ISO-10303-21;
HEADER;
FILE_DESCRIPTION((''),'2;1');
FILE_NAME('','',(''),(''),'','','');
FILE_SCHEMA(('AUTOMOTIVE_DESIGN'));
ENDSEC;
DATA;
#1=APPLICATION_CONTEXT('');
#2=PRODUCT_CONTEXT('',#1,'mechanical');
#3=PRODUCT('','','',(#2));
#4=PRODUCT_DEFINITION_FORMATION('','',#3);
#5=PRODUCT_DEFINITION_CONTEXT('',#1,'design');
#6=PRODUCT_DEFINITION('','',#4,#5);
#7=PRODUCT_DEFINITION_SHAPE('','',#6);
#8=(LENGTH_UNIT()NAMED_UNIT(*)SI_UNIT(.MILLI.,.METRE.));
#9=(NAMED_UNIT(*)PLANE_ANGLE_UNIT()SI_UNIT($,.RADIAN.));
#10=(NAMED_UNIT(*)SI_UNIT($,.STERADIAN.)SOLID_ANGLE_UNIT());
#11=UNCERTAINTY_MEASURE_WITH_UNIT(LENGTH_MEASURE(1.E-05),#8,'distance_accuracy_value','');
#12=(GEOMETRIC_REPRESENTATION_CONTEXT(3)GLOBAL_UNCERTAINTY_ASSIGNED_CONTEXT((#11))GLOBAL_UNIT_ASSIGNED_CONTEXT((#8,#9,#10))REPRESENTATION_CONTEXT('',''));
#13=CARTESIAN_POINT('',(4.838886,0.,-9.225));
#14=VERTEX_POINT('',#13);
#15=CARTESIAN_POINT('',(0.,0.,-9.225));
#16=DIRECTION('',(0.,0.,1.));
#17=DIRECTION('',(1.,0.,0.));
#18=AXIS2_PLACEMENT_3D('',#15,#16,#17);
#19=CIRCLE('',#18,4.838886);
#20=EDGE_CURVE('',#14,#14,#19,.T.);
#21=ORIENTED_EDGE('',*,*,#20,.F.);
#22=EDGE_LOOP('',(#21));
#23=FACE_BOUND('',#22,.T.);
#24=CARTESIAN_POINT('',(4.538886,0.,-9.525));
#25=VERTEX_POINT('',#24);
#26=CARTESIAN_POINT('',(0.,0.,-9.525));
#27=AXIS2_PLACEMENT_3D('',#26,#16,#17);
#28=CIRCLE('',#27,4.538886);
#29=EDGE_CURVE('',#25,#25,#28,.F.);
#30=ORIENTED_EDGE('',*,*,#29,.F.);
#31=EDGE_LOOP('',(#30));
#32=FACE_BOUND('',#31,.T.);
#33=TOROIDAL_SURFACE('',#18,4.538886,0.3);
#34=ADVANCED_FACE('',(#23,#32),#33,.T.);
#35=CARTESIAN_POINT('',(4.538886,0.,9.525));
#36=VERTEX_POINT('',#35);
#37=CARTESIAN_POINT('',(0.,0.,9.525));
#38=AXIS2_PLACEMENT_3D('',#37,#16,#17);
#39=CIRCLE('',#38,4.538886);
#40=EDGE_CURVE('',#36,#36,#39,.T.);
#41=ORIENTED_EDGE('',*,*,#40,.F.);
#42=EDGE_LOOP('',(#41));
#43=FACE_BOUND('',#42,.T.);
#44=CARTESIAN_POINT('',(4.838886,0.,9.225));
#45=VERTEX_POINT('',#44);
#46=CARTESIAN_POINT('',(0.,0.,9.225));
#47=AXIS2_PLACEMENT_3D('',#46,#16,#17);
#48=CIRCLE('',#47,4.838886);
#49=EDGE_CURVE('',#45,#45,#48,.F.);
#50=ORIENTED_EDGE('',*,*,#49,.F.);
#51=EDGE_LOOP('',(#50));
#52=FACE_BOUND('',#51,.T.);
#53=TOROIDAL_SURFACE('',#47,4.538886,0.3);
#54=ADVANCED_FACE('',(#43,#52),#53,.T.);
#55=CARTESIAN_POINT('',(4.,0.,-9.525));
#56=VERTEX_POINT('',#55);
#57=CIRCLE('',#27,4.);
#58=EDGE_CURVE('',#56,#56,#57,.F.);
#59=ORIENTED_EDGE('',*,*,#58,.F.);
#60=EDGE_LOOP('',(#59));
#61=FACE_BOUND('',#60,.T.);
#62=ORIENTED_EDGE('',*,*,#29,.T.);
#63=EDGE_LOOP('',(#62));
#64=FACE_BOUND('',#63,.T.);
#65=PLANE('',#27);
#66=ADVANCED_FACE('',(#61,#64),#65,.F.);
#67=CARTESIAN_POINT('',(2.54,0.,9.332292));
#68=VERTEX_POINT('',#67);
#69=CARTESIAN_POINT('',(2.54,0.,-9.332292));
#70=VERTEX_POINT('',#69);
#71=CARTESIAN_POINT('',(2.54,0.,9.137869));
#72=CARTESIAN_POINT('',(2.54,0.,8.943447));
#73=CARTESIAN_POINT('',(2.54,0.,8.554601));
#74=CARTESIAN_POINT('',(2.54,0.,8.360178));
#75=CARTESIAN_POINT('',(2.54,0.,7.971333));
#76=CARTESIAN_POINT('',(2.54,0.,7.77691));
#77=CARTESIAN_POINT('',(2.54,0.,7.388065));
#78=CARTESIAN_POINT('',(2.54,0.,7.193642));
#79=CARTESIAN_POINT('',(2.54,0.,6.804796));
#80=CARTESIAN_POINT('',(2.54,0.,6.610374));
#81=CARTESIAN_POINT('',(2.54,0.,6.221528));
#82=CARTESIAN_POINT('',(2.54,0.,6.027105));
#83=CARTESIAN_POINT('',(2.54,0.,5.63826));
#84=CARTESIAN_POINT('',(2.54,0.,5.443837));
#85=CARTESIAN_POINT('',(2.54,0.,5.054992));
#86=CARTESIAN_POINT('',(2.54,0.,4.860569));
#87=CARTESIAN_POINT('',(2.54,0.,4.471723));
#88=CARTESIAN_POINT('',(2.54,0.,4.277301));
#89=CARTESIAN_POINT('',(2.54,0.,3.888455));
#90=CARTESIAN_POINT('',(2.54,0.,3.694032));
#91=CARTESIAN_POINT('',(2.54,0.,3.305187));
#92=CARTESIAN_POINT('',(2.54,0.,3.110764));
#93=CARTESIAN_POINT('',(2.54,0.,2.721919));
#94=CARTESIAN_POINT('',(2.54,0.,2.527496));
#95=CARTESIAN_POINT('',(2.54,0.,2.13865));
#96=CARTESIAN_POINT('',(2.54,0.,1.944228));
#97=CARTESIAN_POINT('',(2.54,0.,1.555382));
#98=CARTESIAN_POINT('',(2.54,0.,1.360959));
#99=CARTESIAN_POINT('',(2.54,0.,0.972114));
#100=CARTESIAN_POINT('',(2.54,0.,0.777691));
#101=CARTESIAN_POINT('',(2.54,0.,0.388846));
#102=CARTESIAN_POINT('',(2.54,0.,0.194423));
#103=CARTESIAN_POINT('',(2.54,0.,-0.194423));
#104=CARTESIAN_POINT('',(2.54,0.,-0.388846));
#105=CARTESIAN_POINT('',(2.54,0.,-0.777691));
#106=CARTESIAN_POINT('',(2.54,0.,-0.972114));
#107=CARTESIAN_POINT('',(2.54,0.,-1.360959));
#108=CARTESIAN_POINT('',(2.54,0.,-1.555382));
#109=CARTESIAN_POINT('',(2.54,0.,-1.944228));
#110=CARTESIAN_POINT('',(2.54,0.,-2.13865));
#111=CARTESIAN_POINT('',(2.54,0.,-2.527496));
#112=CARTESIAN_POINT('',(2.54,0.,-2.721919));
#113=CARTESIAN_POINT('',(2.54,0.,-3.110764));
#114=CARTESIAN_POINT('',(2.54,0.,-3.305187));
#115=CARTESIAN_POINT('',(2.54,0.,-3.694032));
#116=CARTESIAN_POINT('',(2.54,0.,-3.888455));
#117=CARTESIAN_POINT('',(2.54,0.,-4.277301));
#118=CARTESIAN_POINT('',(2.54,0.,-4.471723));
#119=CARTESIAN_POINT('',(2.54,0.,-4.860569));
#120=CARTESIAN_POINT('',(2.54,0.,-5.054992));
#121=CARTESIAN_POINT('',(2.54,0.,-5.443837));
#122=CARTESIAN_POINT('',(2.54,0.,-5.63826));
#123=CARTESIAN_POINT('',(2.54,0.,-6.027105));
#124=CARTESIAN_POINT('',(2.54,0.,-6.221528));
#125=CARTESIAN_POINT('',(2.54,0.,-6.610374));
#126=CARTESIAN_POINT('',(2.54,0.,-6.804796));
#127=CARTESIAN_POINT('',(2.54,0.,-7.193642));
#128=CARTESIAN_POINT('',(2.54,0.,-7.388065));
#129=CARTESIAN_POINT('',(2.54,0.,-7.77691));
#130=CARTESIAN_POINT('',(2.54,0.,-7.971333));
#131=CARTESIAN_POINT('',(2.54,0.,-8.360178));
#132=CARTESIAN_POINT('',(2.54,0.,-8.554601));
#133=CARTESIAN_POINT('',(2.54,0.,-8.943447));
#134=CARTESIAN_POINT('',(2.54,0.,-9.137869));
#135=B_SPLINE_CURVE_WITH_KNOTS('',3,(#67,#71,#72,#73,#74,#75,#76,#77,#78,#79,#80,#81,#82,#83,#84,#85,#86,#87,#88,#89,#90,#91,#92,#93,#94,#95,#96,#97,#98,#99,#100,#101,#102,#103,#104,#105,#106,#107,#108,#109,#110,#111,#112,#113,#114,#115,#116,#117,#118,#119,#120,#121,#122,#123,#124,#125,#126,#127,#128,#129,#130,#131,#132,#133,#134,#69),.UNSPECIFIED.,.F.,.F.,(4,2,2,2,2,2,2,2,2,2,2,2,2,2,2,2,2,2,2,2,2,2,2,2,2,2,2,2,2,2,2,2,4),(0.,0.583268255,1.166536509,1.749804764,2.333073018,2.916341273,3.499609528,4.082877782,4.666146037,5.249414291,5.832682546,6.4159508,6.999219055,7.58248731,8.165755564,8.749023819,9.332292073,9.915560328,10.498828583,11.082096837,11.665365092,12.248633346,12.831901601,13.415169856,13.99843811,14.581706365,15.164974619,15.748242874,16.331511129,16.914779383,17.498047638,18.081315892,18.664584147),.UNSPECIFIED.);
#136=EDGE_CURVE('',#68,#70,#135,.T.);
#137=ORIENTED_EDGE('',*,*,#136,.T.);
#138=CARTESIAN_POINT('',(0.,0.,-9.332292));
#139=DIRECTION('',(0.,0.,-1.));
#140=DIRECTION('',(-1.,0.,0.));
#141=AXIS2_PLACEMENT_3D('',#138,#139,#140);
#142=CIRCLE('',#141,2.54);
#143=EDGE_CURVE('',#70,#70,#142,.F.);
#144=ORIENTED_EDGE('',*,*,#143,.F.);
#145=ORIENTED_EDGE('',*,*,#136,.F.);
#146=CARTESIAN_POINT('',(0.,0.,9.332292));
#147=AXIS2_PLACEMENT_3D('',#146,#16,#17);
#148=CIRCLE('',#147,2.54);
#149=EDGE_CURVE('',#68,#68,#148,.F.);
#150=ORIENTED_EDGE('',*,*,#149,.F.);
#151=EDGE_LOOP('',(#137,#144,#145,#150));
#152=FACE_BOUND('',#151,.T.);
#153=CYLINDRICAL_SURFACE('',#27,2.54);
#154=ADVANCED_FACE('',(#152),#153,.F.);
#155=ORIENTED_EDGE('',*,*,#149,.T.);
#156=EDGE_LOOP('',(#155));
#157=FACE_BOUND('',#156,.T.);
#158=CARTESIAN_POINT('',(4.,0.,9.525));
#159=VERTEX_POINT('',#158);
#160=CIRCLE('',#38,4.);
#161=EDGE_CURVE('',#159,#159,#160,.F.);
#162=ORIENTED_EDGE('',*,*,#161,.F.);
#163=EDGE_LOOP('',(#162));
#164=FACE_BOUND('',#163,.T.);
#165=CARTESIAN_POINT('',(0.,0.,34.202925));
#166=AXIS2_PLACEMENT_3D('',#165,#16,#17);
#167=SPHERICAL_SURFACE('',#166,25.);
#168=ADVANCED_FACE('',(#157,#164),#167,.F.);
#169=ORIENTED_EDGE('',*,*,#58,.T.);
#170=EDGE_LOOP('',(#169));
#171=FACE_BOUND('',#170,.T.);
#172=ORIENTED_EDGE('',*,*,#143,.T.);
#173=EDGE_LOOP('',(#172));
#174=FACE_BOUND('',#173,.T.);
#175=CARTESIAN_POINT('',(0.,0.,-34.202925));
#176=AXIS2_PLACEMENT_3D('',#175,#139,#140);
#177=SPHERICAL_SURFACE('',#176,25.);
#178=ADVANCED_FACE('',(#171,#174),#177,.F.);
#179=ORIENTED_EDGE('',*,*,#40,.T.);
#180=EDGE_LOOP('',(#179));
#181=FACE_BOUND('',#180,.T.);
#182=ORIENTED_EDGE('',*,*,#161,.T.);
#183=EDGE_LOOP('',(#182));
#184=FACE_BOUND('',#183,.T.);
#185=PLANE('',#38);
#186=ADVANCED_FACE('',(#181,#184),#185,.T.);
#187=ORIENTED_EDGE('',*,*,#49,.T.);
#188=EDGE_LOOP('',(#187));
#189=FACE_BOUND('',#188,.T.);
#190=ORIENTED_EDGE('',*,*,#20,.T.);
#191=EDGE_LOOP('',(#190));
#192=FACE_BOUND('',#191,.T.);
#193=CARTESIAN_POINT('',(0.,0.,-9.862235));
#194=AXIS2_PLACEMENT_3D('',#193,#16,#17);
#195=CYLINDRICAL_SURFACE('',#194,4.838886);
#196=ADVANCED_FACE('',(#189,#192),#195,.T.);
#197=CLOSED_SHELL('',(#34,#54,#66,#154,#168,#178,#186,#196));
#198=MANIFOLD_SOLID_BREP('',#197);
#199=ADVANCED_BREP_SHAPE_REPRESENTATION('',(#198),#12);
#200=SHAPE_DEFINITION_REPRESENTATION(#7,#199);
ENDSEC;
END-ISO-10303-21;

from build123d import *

# Parameters (mm, degrees)
DRAFT1_START       = -9.525
DRAFT1_OUTLINE_R   = 4.838885636
DRAFT1_DEPTH       = 19.05
DRAFT2_ANGLE       = 45
DRAFT3_ANGLE       = 44.810245375
DRAFT4_ANGLE       = 45
DRAFT5_ANGLE       = 45
DRAFT6_ANGLE       = 44.810245375
DRAFT7_ANGLE       = 44.810245375
DRAFT8_ANGLE       = 45
DRAFT9_ANGLE       = 45
DRAFT10_ANGLE      = 45
DRAFT11_ANGLE      = 45
DRAFT12_ANGLE      = 45
FILLET1_R          = 0.0127
CHAMFER1_SIZE      = 0.017960514
FILLET2_R          = 0.3
SKETCH1_R          = 2.54
CUT_EXTRUDE1_DEPTH = 21.241841037


with BuildPart() as part:
    # Draft1: read off the stored shape, not the designer's step
    # Draft1 outline → Draft1 (new body)
    with BuildSketch(Plane.XY.offset(DRAFT1_START)):
        Circle(DRAFT1_OUTLINE_R)
        Polygon((-1.0918, 1.6252), (-0.9521, 1.4855), (-0.9521, 1.6125), (0.9521, 1.6125), (0.9521, 1.4855), (1.0918, 1.6252), (1.168210303, 1.548789697), (1.2315, 1.6125), (1.6125, 1.6125), (1.6125, 1.231499999), (1.485500001, 1.231499999), (1.6252, 1.0918), (1.4855, 0.9521), (1.6125, 0.9521), (1.6125, -0.9521), (1.4855, -0.9521), (1.6252, -1.0918), (1.485500001, -1.231499999), (1.612499999, -1.231499999), (1.6125, -1.6125), (1.2315, -1.6125), (1.2315, -1.4855), (1.0918, -1.6252), (0.9521, -1.4855), (0.9521, -1.6125), (-0.9521, -1.6125), (-0.9521, -1.4855), (-1.0918, -1.6252), (-1.2315, -1.4855), (-1.2315, -1.6125), (-1.6125, -1.6125), (-1.6125, -1.231499999), (-1.485500001, -1.231499999), (-1.6252, -1.0918), (-1.4855, -0.9521), (-1.6125, -0.9521), (-1.6125, 0.9521), (-1.4855, 0.9521), (-1.6252, 1.0918), (-1.485500001, 1.231499999), (-1.612499999, 1.231499999), (-1.6125, 1.6125), (-1.2315, 1.6125), (-1.2315, 1.4855), align=None, mode=Mode.SUBTRACT)
    extrude(amount=DRAFT1_DEPTH)

    # Draft1 2 outline → Draft1 2 (revolve, cut)
    with BuildSketch(Plane.XZ):
        with BuildLine():
            Line((1.6125, -9.525), (4, -9.525))
            ThreePointArc((4, -9.525), (2.809495756, -9.361292288), (1.6125, -9.254982683))
            Line((1.6125, -9.254982683), (1.6125, -9.525))
        make_face()
        with BuildLine():
            Line((1.6125, 9.525), (1.6125, 9.254982683))
            ThreePointArc((1.6125, 9.254982683), (2.809495756, 9.361292288), (4, 9.525))
            Line((4, 9.525), (1.6125, 9.525))
        make_face()
    revolve(axis=Axis((0, 0, 0), (0, 0, 1)), mode=Mode.SUBTRACT)

    # Draft2
    draft2_faces = [part.faces().sort_by_distance(p)[0] for p in [
        (1.549009001, 1.231499999, 0),
    ]]
    draft(draft2_faces, Plane(origin=(1.6125, -1.6125, 11.43), x_dir=(0, 0, -1), z_dir=(-1, 0, 0)), DRAFT2_ANGLE)

    # Draft3
    draft3_faces = [part.faces().sort_by_distance(p)[0] for p in [
        (1.549009001, -1.231499999, 0),
    ]]
    draft(draft3_faces, Plane(origin=(1.6125, -1.6125, 11.43), x_dir=(0, 0, -1), z_dir=(-1, 0, 0)), DRAFT3_ANGLE)

    # Draft4
    draft4_faces = [part.faces().sort_by_distance(p)[0] for p in [
        (1.2315, -1.549009001, 0),
    ]]
    draft(draft4_faces, Plane(origin=(-1.6125, -1.6125, 11.43), x_dir=(0, 0, 1), z_dir=(0, 1, 0)), DRAFT4_ANGLE)

    # Draft5
    draft5_faces = [part.faces().sort_by_distance(p)[0] for p in [
        (-1.2315, 1.549009001, 0),
    ]]
    draft(draft5_faces, Plane(origin=(1.6125, 1.6125, 11.43), x_dir=(0, 0, -1), z_dir=(0, -1, 0)), DRAFT5_ANGLE)

    # Draft6
    draft6_faces = [part.faces().sort_by_distance(p)[0] for p in [
        (-1.549009001, 1.231499999, 0),
    ]]
    draft(draft6_faces, Plane(origin=(-1.6125, 1.6125, 11.43), x_dir=(0, 0, 1), z_dir=(1, 0, 0)), DRAFT6_ANGLE)

    # Draft7
    draft7_faces = [part.faces().sort_by_distance(p)[0] for p in [
        (-1.2315, -1.549009001, 0),
    ]]
    draft(draft7_faces, Plane(origin=(-1.6125, -1.6125, 11.43), x_dir=(0, 0, 1), z_dir=(0, 1, 0)), DRAFT7_ANGLE)

    # Draft8
    draft8_faces = [part.faces().sort_by_distance(p)[0] for p in [
        (-1.549009001, -1.231499999, 0),
    ]]
    draft(draft8_faces, Plane(origin=(-1.6125, 1.6125, 11.43), x_dir=(0, 0, 1), z_dir=(1, 0, 0)), DRAFT8_ANGLE)

    # Draft9
    draft9_faces = [part.faces().sort_by_distance(p)[0] for p in [
        (-0.9521, 1.549009008, 0),
        (0.9521, 1.549009008, 0),
    ]]
    draft(draft9_faces, Plane(origin=(1.6125, 1.6125, 11.43), x_dir=(0, 0, -1), z_dir=(0, -1, 0)), DRAFT9_ANGLE)

    # Draft10
    draft10_faces = [part.faces().sort_by_distance(p)[0] for p in [
        (1.549009008, -0.9521, 0),
        (1.549009008, 0.9521, 0),
    ]]
    draft(draft10_faces, Plane(origin=(1.6125, -1.6125, 11.43), x_dir=(0, 0, -1), z_dir=(-1, 0, 0)), DRAFT10_ANGLE)

    # Draft11
    draft11_faces = [part.faces().sort_by_distance(p)[0] for p in [
        (-0.9521, -1.549009008, 0),
        (0.9521, -1.549009008, 0),
    ]]
    draft(draft11_faces, Plane(origin=(-1.6125, -1.6125, 11.43), x_dir=(0, 0, 1), z_dir=(0, 1, 0)), DRAFT11_ANGLE)

    # Draft12
    draft12_faces = [part.faces().sort_by_distance(p)[0] for p in [
        (-1.549009008, 0.9521, 0),
        (-1.549009008, -0.9521, 0),
    ]]
    draft(draft12_faces, Plane(origin=(-1.6125, 1.6125, 11.43), x_dir=(0, 0, 1), z_dir=(1, 0, 0)), DRAFT12_ANGLE)

    # Fillet1
    fillet1_edges = [part.edges().sort_by_distance(p)[0] for p in [
        (-1.0156, 1.549, 0),
        (-1.168, 1.549, 0),
        (-1.548789698, 1.168210302, 0),
        (-1.549, 1.0156, 0),
        (-1.549, -1.0156, 0),
        (-1.549, -1.168, 0),
        (-1.168210303, -1.548789697, 0),
        (-1.0156, -1.549, 0),
        (1.0156, -1.549, 0),
        (1.168, -1.549, 0),
        (1.548789698, -1.168210302, 0),
        (1.549, -1.0156, 0),
        (1.549, 1.0156, 0),
        (1.549, 1.168, 0),
        (1.168210303, 1.548789697, 0),
        (1.0156, 1.549, 0),
    ]]
    fillet(fillet1_edges, radius=FILLET1_R)

    # Chamfer1
    chamfer1_edges = [part.edges().sort_by_distance(p)[0] for p in [
        (-1.0918, 1.6252, 0),
        (-1.6252, 1.0918, 0),
        (-1.6252, -1.0918, 0),
        (1.6252, -1.0918, 0),
        (1.6252, 1.0918, 0),
        (1.0918, 1.6252, 0),
    ]]
    chamfer(chamfer1_edges, length=CHAMFER1_SIZE)

    # Fillet2
    fillet2_edges = [part.edges().sort_by_distance(p)[0] for p in [
        (-4.838885636, 0, 9.525),
        (-4.838885636, 0, -9.525),
        (-1.6125, 1.6125, 0),
        (-1.6125, -1.6125, 0),
        (1.6125, -1.6125, 0),
        (1.6125, 1.6125, 0),
    ]]
    fillet(fillet2_edges, radius=FILLET2_R)

    # Sketch1 → Cut-Extrude1 (cut, through all)
    with BuildSketch(Plane.XY.offset(9.525)):
        Circle(SKETCH1_R)
    extrude(amount=-CUT_EXTRUDE1_DEPTH, mode=Mode.SUBTRACT)


solid = part.part
